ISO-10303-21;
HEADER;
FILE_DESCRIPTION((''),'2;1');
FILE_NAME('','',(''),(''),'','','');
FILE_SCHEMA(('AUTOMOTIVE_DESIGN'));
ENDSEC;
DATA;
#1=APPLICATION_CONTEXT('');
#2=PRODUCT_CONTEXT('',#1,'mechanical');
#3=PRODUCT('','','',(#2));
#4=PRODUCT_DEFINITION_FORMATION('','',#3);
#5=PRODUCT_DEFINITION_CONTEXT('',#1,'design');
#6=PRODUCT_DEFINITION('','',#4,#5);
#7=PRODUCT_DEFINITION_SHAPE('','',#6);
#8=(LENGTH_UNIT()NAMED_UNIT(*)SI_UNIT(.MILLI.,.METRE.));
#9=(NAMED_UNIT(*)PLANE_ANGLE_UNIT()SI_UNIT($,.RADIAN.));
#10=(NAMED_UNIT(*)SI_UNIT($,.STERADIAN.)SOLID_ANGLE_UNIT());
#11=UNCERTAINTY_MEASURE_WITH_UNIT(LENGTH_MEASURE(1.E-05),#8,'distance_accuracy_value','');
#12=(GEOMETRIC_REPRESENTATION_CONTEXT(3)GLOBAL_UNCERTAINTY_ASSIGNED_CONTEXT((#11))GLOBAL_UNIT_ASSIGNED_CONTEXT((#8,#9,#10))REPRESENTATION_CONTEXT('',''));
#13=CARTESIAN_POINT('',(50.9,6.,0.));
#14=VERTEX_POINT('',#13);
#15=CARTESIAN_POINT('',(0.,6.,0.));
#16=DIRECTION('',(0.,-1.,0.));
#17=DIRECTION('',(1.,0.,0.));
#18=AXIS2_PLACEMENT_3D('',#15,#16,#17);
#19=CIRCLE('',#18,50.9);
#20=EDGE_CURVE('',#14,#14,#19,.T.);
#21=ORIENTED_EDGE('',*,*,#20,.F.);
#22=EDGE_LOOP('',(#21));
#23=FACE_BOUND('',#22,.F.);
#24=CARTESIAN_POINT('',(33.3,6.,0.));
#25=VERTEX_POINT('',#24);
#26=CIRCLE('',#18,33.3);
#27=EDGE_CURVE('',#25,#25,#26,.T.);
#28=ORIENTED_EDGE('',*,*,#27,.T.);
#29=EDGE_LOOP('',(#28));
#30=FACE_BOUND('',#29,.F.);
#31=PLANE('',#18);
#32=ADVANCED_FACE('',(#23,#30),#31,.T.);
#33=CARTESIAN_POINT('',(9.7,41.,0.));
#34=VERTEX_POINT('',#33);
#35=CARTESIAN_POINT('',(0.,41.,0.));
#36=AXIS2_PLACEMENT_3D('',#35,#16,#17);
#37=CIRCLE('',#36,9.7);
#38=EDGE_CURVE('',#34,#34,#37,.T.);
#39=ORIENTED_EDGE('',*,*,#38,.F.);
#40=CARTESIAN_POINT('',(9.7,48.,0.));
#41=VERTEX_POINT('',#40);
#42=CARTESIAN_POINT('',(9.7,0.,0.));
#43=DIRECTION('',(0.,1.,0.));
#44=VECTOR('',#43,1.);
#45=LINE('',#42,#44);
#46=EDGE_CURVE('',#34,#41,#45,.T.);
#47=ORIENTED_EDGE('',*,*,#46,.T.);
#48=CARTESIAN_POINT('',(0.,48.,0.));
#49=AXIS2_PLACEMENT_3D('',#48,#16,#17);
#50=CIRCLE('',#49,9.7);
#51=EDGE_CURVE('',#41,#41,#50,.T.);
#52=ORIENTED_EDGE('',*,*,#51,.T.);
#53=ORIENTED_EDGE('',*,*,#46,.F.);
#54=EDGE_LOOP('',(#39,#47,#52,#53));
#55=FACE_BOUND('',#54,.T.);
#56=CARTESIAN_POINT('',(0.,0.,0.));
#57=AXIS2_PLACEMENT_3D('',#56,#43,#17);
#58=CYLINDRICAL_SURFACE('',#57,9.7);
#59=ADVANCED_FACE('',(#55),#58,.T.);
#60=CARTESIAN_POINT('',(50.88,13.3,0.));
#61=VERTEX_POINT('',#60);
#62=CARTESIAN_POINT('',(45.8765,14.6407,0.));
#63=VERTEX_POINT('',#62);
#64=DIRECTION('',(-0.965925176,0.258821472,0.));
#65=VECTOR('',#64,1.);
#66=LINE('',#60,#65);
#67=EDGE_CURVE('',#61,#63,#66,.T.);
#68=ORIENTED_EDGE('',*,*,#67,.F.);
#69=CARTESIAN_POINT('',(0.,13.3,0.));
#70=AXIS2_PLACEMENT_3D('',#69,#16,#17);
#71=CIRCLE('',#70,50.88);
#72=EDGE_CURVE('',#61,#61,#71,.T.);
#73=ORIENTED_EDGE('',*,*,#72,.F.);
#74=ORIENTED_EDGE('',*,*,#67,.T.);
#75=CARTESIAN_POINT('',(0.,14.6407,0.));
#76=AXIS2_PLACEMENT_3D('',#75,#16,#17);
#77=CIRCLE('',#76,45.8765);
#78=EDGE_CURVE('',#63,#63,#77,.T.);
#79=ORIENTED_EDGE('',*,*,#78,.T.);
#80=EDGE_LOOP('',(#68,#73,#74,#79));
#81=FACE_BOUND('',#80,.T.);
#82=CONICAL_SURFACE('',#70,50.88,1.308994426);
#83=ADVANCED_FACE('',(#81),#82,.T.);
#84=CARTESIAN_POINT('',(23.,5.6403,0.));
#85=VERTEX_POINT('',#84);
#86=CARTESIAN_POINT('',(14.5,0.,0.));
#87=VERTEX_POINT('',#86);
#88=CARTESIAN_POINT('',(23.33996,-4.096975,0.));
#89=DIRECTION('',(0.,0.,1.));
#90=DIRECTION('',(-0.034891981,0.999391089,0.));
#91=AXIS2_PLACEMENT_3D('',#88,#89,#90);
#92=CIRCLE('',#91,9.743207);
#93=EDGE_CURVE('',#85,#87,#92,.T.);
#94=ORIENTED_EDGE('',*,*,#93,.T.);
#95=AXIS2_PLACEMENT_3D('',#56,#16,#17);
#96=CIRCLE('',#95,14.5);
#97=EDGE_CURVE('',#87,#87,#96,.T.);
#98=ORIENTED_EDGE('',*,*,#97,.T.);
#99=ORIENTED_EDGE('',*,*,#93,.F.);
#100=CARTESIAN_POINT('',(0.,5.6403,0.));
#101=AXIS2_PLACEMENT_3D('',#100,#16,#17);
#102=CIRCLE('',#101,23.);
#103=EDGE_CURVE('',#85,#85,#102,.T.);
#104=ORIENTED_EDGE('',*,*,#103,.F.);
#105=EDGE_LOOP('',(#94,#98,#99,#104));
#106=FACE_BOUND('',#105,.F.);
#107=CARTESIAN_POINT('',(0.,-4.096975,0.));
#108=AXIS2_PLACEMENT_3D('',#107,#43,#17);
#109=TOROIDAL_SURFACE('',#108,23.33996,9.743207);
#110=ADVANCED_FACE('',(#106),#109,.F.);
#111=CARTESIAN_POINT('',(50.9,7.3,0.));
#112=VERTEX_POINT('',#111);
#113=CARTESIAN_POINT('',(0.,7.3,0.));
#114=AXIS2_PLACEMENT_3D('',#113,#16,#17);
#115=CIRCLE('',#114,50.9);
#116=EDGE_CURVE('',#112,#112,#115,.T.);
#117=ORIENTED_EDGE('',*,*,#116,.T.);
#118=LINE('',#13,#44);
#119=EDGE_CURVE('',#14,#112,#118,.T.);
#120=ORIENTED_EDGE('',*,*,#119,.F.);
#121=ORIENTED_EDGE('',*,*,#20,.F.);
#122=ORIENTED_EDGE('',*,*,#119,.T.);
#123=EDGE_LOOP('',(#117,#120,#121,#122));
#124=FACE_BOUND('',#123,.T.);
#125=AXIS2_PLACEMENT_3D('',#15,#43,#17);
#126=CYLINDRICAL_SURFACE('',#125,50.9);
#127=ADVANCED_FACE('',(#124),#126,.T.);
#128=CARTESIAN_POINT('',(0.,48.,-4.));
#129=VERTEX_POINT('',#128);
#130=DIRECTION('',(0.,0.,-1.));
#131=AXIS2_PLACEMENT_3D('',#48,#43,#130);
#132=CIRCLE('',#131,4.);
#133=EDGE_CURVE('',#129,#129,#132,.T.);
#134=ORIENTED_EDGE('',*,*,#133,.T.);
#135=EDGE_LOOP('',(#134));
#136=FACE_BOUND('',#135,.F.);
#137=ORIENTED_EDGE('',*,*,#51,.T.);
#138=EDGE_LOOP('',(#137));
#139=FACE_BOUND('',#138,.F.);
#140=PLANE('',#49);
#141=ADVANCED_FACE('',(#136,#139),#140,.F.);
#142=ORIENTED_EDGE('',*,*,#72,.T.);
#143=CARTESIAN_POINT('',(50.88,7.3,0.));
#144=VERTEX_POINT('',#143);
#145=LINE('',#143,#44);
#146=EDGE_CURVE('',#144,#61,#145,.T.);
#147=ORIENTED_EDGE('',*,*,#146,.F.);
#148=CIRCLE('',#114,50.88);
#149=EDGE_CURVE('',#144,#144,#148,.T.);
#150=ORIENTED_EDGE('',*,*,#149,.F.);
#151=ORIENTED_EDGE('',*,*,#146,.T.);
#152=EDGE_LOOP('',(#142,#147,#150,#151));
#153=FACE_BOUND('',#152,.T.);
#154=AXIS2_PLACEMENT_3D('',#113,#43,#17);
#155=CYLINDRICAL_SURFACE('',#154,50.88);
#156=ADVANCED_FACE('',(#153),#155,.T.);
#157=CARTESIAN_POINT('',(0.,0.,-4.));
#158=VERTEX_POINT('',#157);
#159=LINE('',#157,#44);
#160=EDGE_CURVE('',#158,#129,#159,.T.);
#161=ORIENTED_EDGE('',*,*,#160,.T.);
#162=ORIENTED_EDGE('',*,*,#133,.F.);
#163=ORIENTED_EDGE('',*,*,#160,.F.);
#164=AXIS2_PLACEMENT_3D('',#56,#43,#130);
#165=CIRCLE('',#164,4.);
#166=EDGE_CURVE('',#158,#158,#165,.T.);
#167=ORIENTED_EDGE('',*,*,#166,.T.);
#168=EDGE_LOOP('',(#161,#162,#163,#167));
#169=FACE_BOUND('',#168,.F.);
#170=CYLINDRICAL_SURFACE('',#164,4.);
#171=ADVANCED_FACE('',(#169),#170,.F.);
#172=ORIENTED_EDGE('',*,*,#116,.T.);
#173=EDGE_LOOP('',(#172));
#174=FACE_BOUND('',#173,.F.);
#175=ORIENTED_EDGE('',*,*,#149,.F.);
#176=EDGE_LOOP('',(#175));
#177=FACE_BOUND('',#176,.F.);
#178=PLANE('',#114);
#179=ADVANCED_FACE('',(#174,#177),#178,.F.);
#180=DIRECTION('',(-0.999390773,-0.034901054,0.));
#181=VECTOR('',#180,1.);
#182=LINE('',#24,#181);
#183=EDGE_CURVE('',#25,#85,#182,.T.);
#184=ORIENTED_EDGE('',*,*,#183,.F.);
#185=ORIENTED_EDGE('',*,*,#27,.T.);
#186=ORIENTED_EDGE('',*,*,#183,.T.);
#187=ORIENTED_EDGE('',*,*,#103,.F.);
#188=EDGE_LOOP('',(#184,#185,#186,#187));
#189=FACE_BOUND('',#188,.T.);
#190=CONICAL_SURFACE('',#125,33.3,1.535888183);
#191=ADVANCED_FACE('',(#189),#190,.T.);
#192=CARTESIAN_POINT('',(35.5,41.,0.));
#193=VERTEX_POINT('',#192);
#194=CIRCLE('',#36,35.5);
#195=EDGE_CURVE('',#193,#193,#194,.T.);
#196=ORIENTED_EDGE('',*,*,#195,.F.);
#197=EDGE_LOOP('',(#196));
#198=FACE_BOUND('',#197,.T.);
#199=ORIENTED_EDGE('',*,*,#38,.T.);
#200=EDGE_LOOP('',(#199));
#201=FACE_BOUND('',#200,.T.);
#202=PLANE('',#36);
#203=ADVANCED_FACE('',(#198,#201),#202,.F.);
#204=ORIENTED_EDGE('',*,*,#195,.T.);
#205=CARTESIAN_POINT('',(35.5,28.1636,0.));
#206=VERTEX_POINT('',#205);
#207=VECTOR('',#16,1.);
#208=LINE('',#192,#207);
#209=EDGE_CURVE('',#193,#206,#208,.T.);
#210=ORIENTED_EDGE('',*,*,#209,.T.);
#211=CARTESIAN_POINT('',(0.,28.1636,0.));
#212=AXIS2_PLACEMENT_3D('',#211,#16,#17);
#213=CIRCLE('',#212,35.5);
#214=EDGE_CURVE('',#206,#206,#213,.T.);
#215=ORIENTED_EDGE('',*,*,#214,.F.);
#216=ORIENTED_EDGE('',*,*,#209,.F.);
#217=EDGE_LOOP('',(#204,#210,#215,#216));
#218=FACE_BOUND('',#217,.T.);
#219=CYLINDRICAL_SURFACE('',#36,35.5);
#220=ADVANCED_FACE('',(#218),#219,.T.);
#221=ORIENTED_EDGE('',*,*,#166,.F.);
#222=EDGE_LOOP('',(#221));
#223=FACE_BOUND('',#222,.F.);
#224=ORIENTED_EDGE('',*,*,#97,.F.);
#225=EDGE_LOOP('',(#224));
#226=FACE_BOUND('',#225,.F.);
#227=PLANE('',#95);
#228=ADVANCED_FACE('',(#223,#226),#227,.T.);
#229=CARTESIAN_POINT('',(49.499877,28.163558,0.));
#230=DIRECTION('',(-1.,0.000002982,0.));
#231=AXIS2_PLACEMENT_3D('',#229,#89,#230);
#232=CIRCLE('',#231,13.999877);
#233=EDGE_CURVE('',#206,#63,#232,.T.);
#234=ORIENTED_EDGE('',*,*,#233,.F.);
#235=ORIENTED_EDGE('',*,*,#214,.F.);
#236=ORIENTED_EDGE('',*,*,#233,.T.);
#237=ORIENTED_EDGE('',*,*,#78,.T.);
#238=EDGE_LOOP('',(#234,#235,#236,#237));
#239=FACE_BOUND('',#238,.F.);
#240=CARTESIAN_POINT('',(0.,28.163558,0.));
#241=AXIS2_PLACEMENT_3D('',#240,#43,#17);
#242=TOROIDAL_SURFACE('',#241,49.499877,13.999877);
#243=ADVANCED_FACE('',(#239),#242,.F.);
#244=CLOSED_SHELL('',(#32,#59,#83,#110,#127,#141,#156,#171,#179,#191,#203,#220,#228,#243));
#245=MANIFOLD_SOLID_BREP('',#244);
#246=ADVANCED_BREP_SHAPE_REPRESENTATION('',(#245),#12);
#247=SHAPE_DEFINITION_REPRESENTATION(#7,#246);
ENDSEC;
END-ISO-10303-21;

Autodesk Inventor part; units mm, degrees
ref_plane "YZ Plane" through (0, 0, 0) normal (1, 0, 0) x (0, 1, 0)
ref_plane "XZ Plane" through (0, 0, 0) normal (0, 1, 0) x (-1, 0, 0)
ref_plane "XY Plane" through (0, 0, 0) normal (0, 0, 1) x (1, 0, 0)
sketch "Skizze5" plane through (0, 0, 0) normal (0, 0, 1) x (1, 0, 0)
  line L0 (0, 0) -> (14.5, 0)
  line L1 (33.3, 6) -> (50.9, 6)
  line L2 (33.3, 6) -> (23, 5.6403)
  arc A0 (23, 5.6403) -> (14.5, 0) centre (23.34, -4.0971) ccw
  line L3 (50.9, 6) -> (50.9, 7.3)
  line L4 (50.9, 7.3) -> (50.88, 7.3)
  line L5 (50.88, 7.3) -> (50.88, 13.3)
  line L6 (0, 0) -> (9.7, 0)
  line L7 (9.7, 0) -> (9.7, 48)
  line L8 (9.7, 48) -> (0, 48)
  line L9 (0, 48) -> (0, 0)
  line L10 (9.7, 48) -> (9.7, 41)
  line L11 (9.7, 41) -> (35.5, 41)
  line L12 (35.5, 41) -> (35.5, 17.4211)
  line L13 (50.88, 13.3) -> (35.5, 17.4211)
  arc A1 (35.5, 28.1636) -> (45.8765, 14.6407) centre (49.5, 28.1636) ccw
  line L14 (50.88, 13.3) -> (35.0608, 13.3)
  dimension "d21" = 14.5
  dimension "d22" = 50.9
  dimension "d23" = 6
  dimension "d24" = 33.3
  dimension "d25" = 23
  dimension "d26" = 2
  dimension "d28" = 1.3
  dimension "d29" = 0.02
  dimension "d30" = 6
  dimension "d31" = 9.7
  dimension "d32" = 48
  dimension "d33" = 7
  dimension "d47" = 25.8
  dimension "d48" = 35.5
  dimension "d49" = 105
  dimension "d53" = 14
  dimension "d54" = 15
  dimension "d55" = 35
revolve "Umdrehung1" add sketch "Skizze5" angle 360 about axis through (0, 48, 0) along (0, -1, 0)
sketch "Skizze6" plane through (0, 0, 0) normal (0, -1, 0) x (1, 0, 0)
  circle A0 centre (0, 0) radius 14.5 projected
hole "Hole2" at (0, 0, 0) direction (0, 1, 0) diameter 8 end through all
